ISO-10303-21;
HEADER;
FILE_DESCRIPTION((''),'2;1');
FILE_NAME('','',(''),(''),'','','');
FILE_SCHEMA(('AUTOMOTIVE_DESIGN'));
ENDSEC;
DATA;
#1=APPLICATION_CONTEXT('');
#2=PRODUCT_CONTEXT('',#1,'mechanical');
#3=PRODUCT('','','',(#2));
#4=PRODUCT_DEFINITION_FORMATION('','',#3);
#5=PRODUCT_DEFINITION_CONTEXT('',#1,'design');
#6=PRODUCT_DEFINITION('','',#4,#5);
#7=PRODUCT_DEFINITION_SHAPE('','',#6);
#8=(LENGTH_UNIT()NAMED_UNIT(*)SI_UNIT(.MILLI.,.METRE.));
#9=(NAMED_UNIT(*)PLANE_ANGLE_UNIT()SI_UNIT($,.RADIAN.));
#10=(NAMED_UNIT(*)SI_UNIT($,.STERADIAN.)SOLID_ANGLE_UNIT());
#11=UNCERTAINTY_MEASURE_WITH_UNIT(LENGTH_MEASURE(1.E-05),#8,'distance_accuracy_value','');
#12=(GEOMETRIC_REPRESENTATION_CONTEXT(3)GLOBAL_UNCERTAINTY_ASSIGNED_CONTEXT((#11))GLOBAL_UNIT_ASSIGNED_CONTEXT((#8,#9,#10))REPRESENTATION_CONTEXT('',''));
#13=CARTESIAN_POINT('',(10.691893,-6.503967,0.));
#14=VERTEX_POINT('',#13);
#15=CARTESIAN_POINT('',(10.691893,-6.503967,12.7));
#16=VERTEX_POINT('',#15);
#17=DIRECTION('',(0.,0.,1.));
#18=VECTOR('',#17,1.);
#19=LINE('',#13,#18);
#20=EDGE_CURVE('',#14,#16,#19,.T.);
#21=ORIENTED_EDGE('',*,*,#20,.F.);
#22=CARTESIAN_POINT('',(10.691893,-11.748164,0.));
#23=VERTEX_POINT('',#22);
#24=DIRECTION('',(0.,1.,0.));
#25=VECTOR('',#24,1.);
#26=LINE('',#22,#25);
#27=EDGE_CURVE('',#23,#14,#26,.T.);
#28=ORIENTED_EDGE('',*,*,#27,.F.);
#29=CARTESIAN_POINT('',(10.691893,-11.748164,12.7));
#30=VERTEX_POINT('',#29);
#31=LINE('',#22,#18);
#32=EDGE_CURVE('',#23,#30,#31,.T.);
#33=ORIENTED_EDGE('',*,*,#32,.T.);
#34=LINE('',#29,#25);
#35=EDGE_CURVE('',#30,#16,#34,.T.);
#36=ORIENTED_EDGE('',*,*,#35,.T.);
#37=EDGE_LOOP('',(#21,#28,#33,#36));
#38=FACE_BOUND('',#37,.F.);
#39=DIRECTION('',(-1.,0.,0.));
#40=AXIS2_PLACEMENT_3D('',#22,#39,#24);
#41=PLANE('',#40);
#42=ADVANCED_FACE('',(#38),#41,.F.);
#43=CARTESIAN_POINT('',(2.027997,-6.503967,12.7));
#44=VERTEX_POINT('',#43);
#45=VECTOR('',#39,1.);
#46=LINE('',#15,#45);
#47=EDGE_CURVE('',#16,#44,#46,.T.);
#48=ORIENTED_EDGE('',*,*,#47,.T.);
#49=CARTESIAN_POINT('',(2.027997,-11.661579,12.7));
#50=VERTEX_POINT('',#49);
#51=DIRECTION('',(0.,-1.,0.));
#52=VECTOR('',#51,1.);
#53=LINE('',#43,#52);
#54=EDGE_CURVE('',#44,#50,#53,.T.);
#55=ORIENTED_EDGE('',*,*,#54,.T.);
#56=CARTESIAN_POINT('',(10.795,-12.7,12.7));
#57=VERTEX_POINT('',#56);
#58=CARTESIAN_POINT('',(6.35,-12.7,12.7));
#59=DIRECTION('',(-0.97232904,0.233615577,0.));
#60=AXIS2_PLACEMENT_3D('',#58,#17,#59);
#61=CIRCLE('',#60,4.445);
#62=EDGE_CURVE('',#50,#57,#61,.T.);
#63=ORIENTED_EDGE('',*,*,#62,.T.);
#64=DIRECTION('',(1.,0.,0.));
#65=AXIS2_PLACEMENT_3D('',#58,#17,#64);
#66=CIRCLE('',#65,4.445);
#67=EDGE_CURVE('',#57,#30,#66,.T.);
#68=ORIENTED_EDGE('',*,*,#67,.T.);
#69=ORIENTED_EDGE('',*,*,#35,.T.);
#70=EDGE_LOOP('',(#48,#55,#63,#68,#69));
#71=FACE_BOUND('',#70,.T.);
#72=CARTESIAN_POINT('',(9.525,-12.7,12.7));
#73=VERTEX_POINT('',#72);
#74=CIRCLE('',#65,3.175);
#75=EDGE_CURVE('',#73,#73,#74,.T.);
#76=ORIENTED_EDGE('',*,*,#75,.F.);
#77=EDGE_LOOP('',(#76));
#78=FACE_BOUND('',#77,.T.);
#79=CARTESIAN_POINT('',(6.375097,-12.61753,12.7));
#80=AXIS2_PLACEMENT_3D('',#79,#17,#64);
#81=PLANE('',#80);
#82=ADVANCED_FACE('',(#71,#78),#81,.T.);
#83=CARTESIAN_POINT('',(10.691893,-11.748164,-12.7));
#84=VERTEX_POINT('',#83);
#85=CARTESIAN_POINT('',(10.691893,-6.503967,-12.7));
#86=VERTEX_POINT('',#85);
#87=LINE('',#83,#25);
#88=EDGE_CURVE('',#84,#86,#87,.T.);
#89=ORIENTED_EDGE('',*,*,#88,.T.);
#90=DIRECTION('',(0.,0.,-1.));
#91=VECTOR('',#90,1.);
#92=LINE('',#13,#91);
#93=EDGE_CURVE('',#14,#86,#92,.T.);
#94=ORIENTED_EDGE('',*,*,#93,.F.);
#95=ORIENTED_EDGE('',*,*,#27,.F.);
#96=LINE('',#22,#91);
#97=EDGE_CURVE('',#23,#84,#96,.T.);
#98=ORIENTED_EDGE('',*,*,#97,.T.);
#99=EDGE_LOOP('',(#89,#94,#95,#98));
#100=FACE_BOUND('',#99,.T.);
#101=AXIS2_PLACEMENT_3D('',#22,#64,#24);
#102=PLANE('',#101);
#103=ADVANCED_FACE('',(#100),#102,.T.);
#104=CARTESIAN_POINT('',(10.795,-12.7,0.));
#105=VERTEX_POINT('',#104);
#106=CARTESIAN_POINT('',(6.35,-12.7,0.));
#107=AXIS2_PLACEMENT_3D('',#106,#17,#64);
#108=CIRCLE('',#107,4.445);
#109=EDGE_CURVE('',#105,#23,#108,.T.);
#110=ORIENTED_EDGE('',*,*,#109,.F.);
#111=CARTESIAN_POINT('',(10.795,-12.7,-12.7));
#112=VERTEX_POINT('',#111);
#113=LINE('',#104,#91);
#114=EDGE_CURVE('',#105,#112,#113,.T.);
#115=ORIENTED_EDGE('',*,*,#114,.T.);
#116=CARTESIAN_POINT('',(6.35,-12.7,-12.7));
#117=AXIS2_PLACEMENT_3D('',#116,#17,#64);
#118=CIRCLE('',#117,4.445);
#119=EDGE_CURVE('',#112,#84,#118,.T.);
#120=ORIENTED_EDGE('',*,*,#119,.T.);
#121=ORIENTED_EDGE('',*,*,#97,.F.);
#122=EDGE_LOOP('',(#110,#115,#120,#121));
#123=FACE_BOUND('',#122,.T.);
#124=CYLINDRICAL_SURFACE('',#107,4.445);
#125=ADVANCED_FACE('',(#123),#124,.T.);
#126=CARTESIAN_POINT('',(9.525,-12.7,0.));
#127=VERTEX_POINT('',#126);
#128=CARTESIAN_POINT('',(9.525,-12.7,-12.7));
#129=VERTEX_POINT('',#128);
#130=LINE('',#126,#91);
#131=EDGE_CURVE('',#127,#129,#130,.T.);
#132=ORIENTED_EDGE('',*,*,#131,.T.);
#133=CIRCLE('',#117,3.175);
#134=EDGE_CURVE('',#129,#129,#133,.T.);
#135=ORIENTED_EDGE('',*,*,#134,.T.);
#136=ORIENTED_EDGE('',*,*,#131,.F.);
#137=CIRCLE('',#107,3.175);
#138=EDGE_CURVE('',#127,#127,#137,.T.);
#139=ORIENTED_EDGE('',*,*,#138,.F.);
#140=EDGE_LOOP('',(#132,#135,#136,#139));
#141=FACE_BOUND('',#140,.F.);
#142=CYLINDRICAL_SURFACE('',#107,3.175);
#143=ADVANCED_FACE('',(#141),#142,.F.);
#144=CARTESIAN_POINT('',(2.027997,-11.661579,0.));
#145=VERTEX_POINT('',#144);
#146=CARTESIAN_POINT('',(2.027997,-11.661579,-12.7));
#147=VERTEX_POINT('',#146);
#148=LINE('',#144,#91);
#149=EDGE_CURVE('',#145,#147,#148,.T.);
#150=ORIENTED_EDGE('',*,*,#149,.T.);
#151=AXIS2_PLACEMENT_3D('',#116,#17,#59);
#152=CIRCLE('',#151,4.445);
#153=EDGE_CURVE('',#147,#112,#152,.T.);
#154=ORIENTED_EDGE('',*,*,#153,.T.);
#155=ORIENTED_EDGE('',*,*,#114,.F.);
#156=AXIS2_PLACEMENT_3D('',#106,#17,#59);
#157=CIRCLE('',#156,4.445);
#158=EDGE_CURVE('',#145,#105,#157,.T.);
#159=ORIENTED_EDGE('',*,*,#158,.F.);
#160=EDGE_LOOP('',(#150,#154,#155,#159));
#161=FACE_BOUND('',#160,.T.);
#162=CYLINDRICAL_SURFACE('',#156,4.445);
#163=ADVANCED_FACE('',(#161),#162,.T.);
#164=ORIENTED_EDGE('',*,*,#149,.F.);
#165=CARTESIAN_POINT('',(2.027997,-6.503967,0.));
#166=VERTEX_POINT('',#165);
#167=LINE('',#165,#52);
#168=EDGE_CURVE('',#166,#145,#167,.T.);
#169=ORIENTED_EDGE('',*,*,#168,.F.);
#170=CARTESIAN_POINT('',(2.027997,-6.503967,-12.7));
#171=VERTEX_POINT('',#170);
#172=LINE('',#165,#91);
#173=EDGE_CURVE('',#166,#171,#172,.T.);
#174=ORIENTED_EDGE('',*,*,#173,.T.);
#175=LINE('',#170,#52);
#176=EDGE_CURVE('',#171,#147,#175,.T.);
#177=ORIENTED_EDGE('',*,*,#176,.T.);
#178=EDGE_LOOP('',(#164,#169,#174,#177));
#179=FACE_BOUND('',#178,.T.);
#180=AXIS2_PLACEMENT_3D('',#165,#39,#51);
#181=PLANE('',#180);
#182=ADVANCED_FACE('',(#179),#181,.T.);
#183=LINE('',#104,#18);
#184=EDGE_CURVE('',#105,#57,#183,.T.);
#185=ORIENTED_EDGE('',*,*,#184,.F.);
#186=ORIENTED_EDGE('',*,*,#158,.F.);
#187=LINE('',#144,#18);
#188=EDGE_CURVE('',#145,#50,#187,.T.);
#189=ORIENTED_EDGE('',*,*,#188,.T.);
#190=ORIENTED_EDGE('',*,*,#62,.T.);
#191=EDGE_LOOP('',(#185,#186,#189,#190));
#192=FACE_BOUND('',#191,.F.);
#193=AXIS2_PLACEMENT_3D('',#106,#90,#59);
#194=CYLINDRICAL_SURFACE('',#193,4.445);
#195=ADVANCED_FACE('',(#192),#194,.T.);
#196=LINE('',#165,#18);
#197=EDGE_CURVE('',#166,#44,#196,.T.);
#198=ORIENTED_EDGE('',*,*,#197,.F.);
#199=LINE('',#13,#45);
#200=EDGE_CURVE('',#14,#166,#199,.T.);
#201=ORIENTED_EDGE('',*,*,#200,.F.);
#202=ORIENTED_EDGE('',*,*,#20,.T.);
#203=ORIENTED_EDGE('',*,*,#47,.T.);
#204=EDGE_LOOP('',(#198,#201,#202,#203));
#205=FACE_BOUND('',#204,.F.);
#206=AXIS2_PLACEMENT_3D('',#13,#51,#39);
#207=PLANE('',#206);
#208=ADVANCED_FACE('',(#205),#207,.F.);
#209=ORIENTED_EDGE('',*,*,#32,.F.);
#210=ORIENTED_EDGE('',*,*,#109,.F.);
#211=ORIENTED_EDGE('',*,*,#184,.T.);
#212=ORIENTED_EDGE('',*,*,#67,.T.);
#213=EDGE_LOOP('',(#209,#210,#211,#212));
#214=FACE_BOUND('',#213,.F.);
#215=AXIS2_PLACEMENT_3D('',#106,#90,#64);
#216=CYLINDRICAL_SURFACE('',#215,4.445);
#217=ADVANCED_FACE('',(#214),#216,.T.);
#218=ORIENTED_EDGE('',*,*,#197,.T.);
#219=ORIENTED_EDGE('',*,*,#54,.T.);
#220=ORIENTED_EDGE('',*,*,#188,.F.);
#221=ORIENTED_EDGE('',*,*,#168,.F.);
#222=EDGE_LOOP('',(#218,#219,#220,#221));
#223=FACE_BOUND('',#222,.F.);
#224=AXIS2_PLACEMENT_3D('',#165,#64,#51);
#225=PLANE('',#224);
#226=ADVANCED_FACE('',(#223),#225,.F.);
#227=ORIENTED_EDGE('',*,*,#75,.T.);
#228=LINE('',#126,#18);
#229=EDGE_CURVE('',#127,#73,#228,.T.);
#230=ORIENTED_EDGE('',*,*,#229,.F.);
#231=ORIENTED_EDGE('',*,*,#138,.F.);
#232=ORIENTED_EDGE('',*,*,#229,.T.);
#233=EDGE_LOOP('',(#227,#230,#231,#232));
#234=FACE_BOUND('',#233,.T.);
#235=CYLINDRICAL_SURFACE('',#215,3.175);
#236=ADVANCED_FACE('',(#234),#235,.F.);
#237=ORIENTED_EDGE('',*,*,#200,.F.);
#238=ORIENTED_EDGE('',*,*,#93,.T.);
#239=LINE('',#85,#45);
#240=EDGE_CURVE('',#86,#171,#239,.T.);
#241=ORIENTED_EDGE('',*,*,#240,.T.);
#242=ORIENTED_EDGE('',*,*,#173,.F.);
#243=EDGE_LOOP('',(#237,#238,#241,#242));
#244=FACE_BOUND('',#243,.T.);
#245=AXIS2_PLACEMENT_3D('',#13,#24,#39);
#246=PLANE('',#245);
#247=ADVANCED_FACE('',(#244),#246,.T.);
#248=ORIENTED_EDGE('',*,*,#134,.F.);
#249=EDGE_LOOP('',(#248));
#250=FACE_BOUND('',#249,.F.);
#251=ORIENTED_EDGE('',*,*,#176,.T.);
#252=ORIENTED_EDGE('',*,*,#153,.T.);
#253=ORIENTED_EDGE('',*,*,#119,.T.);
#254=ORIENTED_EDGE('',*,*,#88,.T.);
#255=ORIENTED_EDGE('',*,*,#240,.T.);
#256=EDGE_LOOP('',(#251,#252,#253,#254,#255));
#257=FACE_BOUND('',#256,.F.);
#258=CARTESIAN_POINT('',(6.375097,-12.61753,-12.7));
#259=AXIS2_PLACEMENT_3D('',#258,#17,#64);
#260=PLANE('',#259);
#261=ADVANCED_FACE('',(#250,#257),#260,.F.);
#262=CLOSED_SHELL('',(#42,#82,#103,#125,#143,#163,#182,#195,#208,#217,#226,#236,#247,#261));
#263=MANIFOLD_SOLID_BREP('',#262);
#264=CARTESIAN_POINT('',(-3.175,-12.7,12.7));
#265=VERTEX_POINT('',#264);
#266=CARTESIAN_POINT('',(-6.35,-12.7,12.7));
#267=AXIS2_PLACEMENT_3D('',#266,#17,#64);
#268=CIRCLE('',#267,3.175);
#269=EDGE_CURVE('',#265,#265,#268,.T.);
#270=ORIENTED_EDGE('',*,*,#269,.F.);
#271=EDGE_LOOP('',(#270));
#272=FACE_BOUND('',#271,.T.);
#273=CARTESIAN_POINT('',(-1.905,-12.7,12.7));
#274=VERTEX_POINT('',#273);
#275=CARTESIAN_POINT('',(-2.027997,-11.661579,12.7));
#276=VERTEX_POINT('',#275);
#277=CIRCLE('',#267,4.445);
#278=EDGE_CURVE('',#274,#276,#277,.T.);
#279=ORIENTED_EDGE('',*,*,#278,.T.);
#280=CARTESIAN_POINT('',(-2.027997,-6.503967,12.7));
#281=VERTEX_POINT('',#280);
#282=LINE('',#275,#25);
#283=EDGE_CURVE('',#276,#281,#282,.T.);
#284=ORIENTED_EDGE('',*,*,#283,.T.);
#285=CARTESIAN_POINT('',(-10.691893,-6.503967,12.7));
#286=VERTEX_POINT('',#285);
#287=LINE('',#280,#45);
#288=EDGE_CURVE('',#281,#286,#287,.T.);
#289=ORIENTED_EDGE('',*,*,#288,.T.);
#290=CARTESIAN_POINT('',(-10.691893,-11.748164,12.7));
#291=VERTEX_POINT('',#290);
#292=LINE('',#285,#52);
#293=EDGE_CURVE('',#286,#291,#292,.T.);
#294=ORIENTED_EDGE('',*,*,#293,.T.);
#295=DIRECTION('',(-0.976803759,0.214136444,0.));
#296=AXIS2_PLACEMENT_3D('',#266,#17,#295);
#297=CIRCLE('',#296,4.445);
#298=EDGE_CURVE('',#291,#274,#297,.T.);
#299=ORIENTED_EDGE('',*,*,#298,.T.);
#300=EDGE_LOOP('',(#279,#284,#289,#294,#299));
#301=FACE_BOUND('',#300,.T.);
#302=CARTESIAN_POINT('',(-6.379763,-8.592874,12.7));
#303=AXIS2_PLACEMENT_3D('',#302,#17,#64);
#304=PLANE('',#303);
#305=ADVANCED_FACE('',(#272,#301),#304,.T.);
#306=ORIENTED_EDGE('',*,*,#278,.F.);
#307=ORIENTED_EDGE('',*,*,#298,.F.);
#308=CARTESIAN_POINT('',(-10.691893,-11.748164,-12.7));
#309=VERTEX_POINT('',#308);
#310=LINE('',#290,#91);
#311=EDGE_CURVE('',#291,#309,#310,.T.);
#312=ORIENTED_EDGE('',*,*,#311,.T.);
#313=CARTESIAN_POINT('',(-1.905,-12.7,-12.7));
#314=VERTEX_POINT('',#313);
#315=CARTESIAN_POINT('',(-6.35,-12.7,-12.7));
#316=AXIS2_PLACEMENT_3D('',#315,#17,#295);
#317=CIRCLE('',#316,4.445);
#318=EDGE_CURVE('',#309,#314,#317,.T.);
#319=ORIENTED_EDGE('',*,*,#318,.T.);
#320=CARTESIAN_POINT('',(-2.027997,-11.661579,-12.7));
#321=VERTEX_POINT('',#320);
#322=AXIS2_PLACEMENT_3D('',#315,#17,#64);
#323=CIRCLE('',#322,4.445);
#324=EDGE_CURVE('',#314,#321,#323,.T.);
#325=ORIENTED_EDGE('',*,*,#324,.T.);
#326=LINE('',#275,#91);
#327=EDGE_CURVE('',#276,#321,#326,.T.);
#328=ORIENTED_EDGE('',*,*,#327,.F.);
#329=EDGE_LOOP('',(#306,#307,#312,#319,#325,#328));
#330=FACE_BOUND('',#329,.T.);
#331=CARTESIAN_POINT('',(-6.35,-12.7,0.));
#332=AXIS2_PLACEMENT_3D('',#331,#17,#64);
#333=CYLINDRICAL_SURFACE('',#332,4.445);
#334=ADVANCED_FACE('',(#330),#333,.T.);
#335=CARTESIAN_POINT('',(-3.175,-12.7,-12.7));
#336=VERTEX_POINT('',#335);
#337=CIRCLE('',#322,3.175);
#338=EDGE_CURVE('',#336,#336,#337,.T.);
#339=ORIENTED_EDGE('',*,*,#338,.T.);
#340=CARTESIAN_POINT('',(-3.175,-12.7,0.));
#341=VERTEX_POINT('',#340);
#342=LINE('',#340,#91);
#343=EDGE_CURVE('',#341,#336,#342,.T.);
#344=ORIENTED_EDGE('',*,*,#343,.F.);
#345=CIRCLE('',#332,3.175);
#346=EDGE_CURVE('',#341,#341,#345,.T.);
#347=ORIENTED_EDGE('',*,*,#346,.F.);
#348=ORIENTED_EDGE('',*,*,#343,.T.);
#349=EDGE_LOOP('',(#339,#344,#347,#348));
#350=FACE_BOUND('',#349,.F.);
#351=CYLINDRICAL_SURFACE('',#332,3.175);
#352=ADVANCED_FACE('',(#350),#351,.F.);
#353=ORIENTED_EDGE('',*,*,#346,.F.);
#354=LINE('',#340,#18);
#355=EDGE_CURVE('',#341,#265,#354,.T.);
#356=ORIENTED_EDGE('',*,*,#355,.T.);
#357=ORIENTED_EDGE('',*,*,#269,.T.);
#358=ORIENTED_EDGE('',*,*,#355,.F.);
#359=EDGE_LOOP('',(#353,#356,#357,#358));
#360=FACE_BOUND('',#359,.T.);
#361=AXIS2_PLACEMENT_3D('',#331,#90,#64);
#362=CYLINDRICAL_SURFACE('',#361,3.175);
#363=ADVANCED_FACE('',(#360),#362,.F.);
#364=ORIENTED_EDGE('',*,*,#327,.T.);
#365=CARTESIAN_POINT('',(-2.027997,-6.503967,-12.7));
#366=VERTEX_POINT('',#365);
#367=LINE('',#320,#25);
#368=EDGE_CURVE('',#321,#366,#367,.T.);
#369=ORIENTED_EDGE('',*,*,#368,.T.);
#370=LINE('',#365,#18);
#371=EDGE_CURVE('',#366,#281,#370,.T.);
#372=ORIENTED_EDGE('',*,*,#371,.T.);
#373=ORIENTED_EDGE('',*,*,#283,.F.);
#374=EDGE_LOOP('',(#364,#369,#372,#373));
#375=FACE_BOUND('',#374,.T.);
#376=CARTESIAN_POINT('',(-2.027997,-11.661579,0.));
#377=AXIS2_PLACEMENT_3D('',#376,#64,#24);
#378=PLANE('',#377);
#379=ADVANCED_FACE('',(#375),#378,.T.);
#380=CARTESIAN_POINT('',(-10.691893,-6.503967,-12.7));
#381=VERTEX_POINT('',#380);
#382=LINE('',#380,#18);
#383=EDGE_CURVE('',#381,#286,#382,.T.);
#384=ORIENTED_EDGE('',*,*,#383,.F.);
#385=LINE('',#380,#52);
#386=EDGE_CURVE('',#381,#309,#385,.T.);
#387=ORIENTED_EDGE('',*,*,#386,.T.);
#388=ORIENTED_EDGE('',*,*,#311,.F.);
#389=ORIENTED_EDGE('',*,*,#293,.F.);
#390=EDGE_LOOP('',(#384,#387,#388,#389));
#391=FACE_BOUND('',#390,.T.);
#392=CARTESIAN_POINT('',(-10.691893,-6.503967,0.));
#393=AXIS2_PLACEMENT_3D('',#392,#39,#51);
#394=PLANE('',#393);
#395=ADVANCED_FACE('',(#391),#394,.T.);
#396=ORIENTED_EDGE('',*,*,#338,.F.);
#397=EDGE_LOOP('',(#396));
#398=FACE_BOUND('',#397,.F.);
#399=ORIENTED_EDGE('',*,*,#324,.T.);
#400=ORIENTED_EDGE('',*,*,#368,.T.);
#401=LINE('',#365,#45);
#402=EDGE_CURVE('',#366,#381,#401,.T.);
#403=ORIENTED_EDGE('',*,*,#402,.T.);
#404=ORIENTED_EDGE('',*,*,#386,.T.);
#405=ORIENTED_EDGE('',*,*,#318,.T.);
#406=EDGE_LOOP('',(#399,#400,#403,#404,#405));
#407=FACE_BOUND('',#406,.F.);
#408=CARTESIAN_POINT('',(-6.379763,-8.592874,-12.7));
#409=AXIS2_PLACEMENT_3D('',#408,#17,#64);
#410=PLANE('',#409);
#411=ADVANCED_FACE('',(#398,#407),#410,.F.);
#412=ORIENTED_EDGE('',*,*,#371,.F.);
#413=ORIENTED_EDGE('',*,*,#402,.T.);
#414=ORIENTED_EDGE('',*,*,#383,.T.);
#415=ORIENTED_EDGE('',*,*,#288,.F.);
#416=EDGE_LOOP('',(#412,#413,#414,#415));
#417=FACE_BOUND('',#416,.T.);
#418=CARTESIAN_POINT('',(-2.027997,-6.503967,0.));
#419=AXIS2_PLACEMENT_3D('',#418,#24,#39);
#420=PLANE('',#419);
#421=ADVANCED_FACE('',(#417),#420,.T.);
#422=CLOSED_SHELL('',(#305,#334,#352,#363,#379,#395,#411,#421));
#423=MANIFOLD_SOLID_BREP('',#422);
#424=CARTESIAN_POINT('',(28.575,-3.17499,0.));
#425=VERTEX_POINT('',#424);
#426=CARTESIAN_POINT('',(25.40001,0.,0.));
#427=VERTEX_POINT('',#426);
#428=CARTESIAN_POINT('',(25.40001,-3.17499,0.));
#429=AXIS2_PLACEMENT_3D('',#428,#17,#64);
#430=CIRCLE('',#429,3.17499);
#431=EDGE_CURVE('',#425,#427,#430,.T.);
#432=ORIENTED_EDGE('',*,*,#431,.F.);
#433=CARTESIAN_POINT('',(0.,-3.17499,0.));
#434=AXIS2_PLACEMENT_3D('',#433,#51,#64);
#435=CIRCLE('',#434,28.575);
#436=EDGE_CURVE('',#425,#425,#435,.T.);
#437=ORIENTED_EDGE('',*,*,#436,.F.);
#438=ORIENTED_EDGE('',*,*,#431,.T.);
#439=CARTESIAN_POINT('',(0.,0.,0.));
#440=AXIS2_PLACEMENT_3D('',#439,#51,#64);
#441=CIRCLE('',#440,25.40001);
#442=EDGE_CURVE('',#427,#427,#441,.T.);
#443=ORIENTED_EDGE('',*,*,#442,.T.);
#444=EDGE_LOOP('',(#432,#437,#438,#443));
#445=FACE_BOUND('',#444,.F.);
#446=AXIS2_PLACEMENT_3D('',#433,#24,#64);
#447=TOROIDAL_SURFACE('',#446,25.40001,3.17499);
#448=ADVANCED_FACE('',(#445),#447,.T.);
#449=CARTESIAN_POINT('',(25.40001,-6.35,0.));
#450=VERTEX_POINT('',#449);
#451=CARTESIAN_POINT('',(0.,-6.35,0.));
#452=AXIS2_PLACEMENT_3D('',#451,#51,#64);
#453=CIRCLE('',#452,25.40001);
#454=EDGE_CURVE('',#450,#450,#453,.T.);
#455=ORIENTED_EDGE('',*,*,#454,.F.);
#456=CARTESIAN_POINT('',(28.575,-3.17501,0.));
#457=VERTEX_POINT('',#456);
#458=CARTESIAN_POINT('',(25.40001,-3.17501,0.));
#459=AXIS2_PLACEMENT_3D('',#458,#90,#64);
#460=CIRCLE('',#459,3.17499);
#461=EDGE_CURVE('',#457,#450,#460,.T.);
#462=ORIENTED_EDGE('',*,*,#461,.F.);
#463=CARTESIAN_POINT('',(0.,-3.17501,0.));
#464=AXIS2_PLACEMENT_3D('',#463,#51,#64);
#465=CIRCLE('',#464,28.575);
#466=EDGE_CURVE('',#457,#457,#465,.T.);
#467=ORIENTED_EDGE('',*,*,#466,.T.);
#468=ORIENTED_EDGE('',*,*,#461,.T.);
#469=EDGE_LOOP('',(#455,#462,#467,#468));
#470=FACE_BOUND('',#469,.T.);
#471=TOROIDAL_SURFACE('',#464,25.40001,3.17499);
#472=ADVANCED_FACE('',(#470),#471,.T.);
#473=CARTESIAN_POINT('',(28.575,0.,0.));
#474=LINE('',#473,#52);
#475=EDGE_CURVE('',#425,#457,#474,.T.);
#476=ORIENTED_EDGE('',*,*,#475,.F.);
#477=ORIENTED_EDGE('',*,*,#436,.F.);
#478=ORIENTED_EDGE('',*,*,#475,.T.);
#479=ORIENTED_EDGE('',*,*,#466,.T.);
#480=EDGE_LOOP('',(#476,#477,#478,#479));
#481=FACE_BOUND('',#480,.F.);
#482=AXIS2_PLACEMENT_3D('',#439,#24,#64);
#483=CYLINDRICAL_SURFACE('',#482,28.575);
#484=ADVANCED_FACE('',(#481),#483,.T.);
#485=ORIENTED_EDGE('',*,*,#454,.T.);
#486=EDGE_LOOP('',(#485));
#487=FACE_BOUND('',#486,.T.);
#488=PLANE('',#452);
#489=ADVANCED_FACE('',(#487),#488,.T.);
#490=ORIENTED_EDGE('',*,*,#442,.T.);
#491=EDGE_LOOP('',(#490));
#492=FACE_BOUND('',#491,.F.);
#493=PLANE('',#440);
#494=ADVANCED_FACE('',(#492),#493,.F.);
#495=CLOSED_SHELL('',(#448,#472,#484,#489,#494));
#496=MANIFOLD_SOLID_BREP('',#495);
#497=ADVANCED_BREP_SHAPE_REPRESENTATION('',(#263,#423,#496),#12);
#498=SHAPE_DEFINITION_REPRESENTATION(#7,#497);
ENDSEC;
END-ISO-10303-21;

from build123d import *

# Parameters (mm, degrees)
F0_R          = 28.575
F1_DEPTH      = 6.35
F2_R          = 3.17499
F3_R          = 3.175
F4_DEPTH      = 12.7
F4_DEPTH_BACK = 12.7


# Not quite as in the source:
# - a fillet or chamfer is up to 0.001 mm smaller than in the source, because OpenCascade refuses the exact size


with BuildPart() as f1:
    # F0 (on Front) → F1 (new body)
    with BuildSketch(Plane.XZ):
        Circle(F0_R)
    extrude(amount=F1_DEPTH)

    # F2 (radius 3.175 in the source; OpenCascade refuses exactly that, so slightly less here)
    f2_edges = [f1.edges().sort_by_distance(p)[0] for p in [
        (-28.575, -6.35, 0),
        (28.575, -3.175, 0),
        (-28.575, 0, 0),
    ]]
    fillet(f2_edges, radius=F2_R)


with BuildPart() as f4:
    # F3 (on Top) → F4 (new body, two sides)
    with BuildSketch(Plane.XY) as f4_sk:
        with BuildLine():
            ThreePointArc((2.0279974168, -11.6615787604), (5.8271599108, -17.1141435456), (10.795, -12.7))
            ThreePointArc((10.795, -12.7), (10.7691479997, -12.2212976328), (10.691892708, -11.7481635057))
            ThreePointArc((10.691892708, -11.7481635057), (6.3944199707, -8.2552219553), (2.0279974168, -11.6615787604))
        make_face()
        with Locations((6.35, -12.7)):
            Circle(F3_R, mode=Mode.SUBTRACT)
        with BuildLine():
            ThreePointArc((2.0279974168, -11.6615787604), (6.3944199707, -8.2552219553), (10.691892708, -11.7481635057))
            Line((10.691892708, -11.7481635057), (10.691892708, -6.5039667386))
            Line((10.691892708, -6.5039667386), (2.0279974168, -6.5039667386))
            Line((2.0279974168, -6.5039667386), (2.0279974168, -11.6615787604))
        make_face()
    extrude(amount=F4_DEPTH)
    extrude(f4_sk.sketch, amount=-F4_DEPTH_BACK)


with BuildPart() as f4b:
    # F3 (on Top) → F4, piece 2 (new body, two sides)
    with BuildSketch(Plane.XY) as f4_2_sk:
        with BuildLine():
            ThreePointArc((-10.691892708, -11.7481635057), (-6.3944199707, -8.2552219553), (-2.0279974168, -11.6615787604))
            Line((-2.0279974168, -11.6615787604), (-2.0279974168, -6.5039667386))
            Line((-2.0279974168, -6.5039667386), (-10.691892708, -6.5039667386))
            Line((-10.691892708, -6.5039667386), (-10.691892708, -11.7481635057))
        make_face()
        with BuildLine():
            ThreePointArc((-1.905, -12.7), (-1.9358564544, -12.1771599108), (-2.0279974168, -11.6615787604))
            ThreePointArc((-2.0279974168, -11.6615787604), (-6.3944199707, -8.2552219553), (-10.691892708, -11.7481635057))
            ThreePointArc((-10.691892708, -11.7481635057), (-6.8287023672, -17.1191479997), (-1.905, -12.7))
        make_face()
        with Locations((-6.35, -12.7)):
            Circle(F3_R, mode=Mode.SUBTRACT)
    extrude(amount=F4_DEPTH)
    extrude(f4_2_sk.sketch, amount=-F4_DEPTH_BACK)


solid = Compound([f1.part, f4.part, f4b.part])
